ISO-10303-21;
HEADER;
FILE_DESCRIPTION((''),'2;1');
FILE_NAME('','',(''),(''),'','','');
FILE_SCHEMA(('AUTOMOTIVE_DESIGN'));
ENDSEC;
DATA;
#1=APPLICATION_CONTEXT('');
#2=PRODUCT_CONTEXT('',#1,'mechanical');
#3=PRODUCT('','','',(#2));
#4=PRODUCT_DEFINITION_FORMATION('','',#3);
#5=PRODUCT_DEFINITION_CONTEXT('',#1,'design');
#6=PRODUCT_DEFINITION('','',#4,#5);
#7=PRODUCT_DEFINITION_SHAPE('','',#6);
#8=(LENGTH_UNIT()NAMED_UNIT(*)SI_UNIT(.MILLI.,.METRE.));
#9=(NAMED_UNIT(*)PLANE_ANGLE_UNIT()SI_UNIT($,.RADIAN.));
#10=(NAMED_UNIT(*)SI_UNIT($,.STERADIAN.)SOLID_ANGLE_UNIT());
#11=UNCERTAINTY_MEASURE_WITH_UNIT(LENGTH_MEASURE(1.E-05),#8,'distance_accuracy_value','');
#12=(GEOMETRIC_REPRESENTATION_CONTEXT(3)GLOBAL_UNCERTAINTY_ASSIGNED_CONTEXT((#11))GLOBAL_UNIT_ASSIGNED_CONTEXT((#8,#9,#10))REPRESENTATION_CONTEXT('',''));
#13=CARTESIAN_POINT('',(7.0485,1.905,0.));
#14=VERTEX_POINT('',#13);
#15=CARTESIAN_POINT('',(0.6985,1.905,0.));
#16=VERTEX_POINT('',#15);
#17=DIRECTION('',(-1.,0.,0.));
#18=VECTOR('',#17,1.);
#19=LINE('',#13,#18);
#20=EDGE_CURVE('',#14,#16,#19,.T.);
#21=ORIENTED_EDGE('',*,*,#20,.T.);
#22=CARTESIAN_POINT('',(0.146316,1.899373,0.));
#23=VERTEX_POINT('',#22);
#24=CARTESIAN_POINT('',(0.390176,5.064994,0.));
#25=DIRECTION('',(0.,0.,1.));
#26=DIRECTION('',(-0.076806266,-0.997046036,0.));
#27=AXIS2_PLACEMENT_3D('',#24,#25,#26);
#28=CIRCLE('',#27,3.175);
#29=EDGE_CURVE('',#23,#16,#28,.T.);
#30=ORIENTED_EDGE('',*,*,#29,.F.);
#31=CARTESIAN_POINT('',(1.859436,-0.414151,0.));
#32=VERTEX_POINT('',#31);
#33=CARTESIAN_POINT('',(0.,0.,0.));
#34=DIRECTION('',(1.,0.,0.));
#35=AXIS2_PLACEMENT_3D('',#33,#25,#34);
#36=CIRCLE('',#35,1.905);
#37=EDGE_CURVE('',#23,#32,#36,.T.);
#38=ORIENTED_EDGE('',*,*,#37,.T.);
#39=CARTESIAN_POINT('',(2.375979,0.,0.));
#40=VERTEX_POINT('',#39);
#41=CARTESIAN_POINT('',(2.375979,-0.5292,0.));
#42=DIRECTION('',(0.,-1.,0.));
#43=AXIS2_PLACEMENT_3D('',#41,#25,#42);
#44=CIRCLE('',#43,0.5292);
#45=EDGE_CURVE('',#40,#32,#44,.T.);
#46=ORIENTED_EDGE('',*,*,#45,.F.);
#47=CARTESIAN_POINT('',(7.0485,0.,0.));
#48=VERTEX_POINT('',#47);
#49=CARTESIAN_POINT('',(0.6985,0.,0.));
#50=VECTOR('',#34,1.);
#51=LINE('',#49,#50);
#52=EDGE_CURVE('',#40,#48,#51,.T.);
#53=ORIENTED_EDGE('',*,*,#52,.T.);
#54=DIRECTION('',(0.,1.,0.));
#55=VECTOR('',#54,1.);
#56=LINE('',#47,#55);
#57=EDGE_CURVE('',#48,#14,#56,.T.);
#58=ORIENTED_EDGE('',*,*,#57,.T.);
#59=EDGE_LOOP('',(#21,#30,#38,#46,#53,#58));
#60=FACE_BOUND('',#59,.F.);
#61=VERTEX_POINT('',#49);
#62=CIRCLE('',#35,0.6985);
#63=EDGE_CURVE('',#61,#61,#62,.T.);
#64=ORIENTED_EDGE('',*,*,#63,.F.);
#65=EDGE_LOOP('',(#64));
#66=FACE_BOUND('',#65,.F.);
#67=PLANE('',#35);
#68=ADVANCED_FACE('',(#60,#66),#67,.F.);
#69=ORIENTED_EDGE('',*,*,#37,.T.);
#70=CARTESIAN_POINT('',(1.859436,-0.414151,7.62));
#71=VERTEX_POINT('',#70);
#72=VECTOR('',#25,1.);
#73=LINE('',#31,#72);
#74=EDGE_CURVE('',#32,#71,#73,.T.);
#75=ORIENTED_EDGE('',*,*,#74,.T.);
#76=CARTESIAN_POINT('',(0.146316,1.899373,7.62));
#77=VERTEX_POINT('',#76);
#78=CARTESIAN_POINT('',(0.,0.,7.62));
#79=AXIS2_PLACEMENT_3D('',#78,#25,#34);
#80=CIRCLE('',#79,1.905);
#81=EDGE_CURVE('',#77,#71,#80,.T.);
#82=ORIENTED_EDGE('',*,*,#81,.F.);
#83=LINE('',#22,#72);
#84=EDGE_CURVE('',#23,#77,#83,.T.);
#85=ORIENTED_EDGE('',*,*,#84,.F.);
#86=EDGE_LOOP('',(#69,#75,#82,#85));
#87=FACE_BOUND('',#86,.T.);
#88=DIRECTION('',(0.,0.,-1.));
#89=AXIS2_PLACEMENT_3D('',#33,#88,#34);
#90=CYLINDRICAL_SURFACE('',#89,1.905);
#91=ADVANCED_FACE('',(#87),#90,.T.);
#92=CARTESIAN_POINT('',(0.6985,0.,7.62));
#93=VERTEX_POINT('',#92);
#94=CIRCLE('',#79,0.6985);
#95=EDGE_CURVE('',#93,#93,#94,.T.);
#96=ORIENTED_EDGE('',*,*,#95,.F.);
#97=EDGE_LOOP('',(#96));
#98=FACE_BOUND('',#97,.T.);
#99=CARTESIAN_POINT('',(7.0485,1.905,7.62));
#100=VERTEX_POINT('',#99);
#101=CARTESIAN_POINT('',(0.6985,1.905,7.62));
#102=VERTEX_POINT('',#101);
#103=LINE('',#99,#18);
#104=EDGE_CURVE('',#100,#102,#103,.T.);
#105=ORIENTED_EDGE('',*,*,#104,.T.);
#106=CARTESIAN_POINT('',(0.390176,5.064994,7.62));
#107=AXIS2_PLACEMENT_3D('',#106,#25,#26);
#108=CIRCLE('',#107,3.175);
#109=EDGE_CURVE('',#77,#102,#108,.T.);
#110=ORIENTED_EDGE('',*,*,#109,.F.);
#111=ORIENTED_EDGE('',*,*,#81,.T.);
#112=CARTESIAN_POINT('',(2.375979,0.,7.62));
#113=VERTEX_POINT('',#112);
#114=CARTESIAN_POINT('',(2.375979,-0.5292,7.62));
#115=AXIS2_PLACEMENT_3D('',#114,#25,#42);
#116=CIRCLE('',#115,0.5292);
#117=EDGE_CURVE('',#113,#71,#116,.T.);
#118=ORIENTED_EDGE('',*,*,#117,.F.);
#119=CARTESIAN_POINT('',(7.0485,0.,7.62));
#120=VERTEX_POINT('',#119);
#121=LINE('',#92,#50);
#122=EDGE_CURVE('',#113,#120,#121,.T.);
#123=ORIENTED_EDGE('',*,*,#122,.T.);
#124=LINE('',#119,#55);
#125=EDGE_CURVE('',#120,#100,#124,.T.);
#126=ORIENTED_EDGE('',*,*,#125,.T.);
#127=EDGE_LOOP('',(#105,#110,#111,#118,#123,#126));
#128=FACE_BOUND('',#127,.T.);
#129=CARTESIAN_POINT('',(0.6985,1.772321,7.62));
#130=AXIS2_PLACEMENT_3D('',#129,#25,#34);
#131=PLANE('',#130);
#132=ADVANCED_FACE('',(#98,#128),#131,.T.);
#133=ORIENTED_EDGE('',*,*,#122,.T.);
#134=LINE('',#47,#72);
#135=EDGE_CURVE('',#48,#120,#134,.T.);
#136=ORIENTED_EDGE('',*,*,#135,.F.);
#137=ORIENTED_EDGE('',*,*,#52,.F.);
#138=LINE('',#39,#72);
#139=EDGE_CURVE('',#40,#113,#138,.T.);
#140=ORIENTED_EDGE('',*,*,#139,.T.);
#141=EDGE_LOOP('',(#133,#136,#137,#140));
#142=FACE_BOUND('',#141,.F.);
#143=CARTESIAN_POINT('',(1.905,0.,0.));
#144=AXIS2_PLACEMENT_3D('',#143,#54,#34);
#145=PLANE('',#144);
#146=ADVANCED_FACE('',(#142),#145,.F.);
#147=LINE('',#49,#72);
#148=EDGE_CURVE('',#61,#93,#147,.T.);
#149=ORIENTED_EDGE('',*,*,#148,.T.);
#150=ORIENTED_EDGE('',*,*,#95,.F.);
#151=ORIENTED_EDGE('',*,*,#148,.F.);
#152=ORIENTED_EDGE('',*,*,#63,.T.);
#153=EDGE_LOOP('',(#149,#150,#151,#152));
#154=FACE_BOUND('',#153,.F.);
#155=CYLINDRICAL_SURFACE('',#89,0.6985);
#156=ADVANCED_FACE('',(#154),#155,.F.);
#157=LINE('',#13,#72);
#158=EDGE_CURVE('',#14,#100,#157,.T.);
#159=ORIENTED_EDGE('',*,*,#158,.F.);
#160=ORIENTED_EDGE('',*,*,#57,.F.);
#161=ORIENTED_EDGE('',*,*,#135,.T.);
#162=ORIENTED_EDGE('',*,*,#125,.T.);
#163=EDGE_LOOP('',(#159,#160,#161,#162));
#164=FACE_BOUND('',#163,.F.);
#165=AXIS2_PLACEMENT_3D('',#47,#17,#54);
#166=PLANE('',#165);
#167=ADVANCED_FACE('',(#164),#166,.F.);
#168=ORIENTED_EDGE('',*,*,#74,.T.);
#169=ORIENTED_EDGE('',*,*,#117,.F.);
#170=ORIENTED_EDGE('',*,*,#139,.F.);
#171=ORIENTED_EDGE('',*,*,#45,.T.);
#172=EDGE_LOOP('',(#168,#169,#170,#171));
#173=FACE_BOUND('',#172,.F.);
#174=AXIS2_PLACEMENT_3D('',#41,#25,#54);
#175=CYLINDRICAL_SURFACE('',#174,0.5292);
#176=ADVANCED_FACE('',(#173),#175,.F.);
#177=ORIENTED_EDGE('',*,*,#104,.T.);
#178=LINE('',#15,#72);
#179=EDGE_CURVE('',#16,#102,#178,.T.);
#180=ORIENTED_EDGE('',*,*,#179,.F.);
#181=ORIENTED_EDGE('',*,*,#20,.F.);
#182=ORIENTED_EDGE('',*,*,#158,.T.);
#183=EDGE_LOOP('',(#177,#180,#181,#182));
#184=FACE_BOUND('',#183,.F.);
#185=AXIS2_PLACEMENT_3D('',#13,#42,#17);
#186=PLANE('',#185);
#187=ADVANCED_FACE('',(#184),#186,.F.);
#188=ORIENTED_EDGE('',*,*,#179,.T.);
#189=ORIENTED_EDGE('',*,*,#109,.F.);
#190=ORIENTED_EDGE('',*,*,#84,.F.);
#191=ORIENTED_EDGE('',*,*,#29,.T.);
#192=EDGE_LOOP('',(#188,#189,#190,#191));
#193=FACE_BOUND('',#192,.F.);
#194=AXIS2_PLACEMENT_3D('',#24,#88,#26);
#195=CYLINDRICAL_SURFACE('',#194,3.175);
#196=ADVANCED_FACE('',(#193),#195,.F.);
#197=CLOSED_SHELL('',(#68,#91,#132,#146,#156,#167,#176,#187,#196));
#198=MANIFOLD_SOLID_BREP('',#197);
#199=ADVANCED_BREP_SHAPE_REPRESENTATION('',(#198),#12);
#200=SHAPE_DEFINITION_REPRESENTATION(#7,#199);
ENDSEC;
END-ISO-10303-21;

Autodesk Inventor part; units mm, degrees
ref_plane "YZ Plane" through (0, 0, 0) normal (1, 0, 0) x (0, 1, 0)
ref_plane "XZ Plane" through (0, 0, 0) normal (0, 1, 0) x (-1, 0, 0)
ref_plane "XY Plane" through (0, 0, 0) normal (0, 0, 1) x (1, 0, 0)
sketch "Sketch1" plane through (0, 0, 0) normal (0, 0, 1) x (1, 0, 0)
  circle A0 centre (0, 0) radius 0.6985
  circle A1 centre (0, 0) radius 1.905
  line L0 (0.6985, 0) -> (7.0485, 0)
  line L1 (7.0485, 0) -> (7.0485, 1.905)
  line L2 (7.0485, 1.905) -> (0.6985, 1.905)
  line L3 (0.6985, 1.905) -> (0.6985, 0)
  point P0 (0.6985, 1.7723)
  point P1 (1.905, 0)
  dimension "d0" = 1.397
  dimension "d1" = 3.81
  dimension "d4" = 6.35
  dimension "d5" = 1.905
extrude "Extrusion1" add sketch "Sketch1" along normal blind 7.62
fillet "Fillet1" radius 3.175 1 edges at (0.6985, 1.7723, 3.81)
fillet "Fillet2" radius 0.5292 1 edges at (1.905, 0, 3.81)
properties part number "innerhinge"
